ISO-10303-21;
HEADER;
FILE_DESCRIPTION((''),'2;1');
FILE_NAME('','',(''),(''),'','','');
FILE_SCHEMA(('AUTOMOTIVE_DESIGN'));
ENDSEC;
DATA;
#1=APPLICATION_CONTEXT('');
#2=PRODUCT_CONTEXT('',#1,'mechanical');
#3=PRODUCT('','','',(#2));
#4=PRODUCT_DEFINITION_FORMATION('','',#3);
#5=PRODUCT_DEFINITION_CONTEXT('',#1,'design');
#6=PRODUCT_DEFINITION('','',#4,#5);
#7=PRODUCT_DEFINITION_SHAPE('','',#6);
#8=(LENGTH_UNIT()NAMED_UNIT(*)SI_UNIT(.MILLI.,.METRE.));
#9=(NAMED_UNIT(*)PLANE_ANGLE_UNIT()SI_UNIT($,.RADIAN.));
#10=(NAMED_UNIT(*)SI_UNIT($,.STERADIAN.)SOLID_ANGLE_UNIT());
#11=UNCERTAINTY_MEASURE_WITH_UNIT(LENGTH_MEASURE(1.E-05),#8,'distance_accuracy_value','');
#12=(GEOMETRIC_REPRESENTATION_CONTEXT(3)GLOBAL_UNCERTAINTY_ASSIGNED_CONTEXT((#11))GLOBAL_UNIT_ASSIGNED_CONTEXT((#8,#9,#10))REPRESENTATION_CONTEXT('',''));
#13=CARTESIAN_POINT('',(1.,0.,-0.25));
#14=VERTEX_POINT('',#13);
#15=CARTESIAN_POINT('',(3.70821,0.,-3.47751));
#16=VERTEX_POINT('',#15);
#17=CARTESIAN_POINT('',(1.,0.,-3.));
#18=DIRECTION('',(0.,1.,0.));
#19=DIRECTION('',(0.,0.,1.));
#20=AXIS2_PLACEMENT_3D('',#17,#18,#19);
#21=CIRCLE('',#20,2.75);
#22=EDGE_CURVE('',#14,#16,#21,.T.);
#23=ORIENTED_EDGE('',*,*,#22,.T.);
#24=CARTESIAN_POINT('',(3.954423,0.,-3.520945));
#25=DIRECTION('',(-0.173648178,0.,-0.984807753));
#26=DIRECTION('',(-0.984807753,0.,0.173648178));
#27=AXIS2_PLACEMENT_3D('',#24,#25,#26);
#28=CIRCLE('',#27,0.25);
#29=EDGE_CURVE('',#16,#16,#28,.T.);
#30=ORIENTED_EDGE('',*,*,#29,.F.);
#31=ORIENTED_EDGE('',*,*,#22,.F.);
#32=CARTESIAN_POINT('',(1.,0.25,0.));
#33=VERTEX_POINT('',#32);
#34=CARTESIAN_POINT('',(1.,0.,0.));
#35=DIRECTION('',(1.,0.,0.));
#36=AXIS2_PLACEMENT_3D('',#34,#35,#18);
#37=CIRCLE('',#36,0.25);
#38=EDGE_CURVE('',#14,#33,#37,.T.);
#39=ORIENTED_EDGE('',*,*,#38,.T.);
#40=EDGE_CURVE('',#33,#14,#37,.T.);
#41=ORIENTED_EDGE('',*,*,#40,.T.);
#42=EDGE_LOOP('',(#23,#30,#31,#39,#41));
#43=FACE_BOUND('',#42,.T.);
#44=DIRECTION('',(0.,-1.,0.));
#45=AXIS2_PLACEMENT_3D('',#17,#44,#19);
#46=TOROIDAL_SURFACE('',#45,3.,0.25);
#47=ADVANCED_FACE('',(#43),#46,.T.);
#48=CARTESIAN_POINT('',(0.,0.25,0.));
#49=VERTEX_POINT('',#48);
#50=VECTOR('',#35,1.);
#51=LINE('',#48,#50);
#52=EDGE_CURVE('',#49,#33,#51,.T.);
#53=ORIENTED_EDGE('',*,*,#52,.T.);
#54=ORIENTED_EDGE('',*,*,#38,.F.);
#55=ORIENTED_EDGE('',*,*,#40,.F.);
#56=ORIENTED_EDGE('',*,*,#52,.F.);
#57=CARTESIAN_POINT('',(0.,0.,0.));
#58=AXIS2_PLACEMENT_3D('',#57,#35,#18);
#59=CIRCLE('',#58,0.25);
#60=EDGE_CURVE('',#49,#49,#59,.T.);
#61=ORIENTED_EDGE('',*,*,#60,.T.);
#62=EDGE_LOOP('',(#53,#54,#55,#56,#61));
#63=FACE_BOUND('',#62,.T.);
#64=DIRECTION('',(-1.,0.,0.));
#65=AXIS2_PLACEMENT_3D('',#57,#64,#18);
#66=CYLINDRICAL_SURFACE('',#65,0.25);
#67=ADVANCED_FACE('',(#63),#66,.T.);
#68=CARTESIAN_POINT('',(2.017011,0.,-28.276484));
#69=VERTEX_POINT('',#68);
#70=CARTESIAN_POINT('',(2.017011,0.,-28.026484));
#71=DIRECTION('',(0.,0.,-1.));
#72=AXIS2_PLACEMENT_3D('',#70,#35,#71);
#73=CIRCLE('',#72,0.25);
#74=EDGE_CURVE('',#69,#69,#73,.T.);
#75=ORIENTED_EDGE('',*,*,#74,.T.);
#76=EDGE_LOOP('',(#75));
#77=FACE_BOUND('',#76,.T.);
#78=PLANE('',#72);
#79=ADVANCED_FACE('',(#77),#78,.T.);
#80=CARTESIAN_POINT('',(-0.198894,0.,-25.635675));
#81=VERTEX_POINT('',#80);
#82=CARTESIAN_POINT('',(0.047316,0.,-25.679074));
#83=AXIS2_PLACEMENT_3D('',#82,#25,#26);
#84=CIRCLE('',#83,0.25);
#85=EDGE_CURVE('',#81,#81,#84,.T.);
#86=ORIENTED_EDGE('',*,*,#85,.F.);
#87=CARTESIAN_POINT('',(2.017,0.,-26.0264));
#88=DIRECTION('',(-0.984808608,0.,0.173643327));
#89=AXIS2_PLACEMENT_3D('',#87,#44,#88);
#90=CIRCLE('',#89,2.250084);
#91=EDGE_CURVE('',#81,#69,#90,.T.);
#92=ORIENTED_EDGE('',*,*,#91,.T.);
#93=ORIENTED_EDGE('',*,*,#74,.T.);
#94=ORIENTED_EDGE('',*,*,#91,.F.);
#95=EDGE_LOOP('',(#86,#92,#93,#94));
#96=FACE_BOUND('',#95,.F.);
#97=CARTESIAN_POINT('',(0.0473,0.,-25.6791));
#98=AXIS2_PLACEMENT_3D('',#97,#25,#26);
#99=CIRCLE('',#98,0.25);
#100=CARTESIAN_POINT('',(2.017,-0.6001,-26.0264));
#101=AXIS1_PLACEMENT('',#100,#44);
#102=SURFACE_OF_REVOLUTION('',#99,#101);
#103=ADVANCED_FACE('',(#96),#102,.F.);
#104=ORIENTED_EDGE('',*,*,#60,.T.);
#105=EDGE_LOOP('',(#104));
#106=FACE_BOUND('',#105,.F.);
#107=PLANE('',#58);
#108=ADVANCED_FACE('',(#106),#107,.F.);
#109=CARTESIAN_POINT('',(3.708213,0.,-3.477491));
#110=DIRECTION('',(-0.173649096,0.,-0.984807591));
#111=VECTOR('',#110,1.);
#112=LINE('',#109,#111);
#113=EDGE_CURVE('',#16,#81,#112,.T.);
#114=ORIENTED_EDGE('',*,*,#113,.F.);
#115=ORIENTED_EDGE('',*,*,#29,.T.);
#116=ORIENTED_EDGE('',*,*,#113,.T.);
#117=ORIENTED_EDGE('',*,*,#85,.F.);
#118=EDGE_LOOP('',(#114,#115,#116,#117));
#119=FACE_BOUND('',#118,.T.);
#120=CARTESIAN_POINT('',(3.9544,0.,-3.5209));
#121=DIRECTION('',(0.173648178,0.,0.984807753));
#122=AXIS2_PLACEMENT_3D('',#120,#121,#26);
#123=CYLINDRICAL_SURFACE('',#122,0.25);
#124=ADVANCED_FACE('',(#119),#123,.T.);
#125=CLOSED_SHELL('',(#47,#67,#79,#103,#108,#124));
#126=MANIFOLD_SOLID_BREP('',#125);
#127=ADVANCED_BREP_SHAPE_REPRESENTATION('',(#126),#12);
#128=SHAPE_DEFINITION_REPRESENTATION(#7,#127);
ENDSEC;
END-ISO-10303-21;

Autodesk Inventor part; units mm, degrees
ref_plane "YZ Plane" through (0, 0, 0) normal (1, 0, 0) x (0, 1, 0)
ref_plane "XZ Plane" through (0, 0, 0) normal (0, 1, 0) x (-1, 0, 0)
ref_plane "XY Plane" through (0, 0, 0) normal (0, 0, 1) x (1, 0, 0)
sketch "スケッチ1" plane through (0, 0, 0) normal (1, 0, 0) x (0, 1, 0)
  circle A0 centre (0, 0) radius 0.25
  dimension "d0" = 0.5
extrude "押し出し1" add sketch "スケッチ1" along normal blind 1
sketch "スケッチ2" plane through (1, 0, 0) normal (1, 0, 0) x (0, 0, -1)
  circle A0 centre (0, 0) radius 0.25
  line L0 (3, -0.6634) -> (3, 0.6005)
  point P0 (3, 0)
  dimension "d3" = 3
revolve "回転1" add sketch "スケッチ2" angle 100 about axis through (1, -0.6634, -3) along (0, 1, 0)
sketch "スケッチ3" plane through (3.9544, 0, -3.5209) normal (-0.1736482, 0, -0.9848078) x (-0.9848078, 0, 0.1736482)
  circle A0 centre (0, 0) radius 0.25 projected
  point P0 (4.5058, 0)
extrude "押し出し2" add sketch "スケッチ3" along normal blind 22.5
sketch "スケッチ4" plane through (0.0473, 0, -25.6791) normal (-0.1736482, 0, -0.9848078) x (-0.9848078, 0, 0.1736482)
  circle A0 centre (0, 0) radius 0.25 projected
  line L0 (-2, -0.6001) -> (-2, 0.5446)
  point P0 (4.5058, 0)
  point P1 (-2, 0)
  dimension "d7" = 2
revolve "回転2" add sketch "スケッチ4" angle 100 about axis through (2.017, -0.6001, -26.0264) along (0, -1, 0)
properties part number "cable"
